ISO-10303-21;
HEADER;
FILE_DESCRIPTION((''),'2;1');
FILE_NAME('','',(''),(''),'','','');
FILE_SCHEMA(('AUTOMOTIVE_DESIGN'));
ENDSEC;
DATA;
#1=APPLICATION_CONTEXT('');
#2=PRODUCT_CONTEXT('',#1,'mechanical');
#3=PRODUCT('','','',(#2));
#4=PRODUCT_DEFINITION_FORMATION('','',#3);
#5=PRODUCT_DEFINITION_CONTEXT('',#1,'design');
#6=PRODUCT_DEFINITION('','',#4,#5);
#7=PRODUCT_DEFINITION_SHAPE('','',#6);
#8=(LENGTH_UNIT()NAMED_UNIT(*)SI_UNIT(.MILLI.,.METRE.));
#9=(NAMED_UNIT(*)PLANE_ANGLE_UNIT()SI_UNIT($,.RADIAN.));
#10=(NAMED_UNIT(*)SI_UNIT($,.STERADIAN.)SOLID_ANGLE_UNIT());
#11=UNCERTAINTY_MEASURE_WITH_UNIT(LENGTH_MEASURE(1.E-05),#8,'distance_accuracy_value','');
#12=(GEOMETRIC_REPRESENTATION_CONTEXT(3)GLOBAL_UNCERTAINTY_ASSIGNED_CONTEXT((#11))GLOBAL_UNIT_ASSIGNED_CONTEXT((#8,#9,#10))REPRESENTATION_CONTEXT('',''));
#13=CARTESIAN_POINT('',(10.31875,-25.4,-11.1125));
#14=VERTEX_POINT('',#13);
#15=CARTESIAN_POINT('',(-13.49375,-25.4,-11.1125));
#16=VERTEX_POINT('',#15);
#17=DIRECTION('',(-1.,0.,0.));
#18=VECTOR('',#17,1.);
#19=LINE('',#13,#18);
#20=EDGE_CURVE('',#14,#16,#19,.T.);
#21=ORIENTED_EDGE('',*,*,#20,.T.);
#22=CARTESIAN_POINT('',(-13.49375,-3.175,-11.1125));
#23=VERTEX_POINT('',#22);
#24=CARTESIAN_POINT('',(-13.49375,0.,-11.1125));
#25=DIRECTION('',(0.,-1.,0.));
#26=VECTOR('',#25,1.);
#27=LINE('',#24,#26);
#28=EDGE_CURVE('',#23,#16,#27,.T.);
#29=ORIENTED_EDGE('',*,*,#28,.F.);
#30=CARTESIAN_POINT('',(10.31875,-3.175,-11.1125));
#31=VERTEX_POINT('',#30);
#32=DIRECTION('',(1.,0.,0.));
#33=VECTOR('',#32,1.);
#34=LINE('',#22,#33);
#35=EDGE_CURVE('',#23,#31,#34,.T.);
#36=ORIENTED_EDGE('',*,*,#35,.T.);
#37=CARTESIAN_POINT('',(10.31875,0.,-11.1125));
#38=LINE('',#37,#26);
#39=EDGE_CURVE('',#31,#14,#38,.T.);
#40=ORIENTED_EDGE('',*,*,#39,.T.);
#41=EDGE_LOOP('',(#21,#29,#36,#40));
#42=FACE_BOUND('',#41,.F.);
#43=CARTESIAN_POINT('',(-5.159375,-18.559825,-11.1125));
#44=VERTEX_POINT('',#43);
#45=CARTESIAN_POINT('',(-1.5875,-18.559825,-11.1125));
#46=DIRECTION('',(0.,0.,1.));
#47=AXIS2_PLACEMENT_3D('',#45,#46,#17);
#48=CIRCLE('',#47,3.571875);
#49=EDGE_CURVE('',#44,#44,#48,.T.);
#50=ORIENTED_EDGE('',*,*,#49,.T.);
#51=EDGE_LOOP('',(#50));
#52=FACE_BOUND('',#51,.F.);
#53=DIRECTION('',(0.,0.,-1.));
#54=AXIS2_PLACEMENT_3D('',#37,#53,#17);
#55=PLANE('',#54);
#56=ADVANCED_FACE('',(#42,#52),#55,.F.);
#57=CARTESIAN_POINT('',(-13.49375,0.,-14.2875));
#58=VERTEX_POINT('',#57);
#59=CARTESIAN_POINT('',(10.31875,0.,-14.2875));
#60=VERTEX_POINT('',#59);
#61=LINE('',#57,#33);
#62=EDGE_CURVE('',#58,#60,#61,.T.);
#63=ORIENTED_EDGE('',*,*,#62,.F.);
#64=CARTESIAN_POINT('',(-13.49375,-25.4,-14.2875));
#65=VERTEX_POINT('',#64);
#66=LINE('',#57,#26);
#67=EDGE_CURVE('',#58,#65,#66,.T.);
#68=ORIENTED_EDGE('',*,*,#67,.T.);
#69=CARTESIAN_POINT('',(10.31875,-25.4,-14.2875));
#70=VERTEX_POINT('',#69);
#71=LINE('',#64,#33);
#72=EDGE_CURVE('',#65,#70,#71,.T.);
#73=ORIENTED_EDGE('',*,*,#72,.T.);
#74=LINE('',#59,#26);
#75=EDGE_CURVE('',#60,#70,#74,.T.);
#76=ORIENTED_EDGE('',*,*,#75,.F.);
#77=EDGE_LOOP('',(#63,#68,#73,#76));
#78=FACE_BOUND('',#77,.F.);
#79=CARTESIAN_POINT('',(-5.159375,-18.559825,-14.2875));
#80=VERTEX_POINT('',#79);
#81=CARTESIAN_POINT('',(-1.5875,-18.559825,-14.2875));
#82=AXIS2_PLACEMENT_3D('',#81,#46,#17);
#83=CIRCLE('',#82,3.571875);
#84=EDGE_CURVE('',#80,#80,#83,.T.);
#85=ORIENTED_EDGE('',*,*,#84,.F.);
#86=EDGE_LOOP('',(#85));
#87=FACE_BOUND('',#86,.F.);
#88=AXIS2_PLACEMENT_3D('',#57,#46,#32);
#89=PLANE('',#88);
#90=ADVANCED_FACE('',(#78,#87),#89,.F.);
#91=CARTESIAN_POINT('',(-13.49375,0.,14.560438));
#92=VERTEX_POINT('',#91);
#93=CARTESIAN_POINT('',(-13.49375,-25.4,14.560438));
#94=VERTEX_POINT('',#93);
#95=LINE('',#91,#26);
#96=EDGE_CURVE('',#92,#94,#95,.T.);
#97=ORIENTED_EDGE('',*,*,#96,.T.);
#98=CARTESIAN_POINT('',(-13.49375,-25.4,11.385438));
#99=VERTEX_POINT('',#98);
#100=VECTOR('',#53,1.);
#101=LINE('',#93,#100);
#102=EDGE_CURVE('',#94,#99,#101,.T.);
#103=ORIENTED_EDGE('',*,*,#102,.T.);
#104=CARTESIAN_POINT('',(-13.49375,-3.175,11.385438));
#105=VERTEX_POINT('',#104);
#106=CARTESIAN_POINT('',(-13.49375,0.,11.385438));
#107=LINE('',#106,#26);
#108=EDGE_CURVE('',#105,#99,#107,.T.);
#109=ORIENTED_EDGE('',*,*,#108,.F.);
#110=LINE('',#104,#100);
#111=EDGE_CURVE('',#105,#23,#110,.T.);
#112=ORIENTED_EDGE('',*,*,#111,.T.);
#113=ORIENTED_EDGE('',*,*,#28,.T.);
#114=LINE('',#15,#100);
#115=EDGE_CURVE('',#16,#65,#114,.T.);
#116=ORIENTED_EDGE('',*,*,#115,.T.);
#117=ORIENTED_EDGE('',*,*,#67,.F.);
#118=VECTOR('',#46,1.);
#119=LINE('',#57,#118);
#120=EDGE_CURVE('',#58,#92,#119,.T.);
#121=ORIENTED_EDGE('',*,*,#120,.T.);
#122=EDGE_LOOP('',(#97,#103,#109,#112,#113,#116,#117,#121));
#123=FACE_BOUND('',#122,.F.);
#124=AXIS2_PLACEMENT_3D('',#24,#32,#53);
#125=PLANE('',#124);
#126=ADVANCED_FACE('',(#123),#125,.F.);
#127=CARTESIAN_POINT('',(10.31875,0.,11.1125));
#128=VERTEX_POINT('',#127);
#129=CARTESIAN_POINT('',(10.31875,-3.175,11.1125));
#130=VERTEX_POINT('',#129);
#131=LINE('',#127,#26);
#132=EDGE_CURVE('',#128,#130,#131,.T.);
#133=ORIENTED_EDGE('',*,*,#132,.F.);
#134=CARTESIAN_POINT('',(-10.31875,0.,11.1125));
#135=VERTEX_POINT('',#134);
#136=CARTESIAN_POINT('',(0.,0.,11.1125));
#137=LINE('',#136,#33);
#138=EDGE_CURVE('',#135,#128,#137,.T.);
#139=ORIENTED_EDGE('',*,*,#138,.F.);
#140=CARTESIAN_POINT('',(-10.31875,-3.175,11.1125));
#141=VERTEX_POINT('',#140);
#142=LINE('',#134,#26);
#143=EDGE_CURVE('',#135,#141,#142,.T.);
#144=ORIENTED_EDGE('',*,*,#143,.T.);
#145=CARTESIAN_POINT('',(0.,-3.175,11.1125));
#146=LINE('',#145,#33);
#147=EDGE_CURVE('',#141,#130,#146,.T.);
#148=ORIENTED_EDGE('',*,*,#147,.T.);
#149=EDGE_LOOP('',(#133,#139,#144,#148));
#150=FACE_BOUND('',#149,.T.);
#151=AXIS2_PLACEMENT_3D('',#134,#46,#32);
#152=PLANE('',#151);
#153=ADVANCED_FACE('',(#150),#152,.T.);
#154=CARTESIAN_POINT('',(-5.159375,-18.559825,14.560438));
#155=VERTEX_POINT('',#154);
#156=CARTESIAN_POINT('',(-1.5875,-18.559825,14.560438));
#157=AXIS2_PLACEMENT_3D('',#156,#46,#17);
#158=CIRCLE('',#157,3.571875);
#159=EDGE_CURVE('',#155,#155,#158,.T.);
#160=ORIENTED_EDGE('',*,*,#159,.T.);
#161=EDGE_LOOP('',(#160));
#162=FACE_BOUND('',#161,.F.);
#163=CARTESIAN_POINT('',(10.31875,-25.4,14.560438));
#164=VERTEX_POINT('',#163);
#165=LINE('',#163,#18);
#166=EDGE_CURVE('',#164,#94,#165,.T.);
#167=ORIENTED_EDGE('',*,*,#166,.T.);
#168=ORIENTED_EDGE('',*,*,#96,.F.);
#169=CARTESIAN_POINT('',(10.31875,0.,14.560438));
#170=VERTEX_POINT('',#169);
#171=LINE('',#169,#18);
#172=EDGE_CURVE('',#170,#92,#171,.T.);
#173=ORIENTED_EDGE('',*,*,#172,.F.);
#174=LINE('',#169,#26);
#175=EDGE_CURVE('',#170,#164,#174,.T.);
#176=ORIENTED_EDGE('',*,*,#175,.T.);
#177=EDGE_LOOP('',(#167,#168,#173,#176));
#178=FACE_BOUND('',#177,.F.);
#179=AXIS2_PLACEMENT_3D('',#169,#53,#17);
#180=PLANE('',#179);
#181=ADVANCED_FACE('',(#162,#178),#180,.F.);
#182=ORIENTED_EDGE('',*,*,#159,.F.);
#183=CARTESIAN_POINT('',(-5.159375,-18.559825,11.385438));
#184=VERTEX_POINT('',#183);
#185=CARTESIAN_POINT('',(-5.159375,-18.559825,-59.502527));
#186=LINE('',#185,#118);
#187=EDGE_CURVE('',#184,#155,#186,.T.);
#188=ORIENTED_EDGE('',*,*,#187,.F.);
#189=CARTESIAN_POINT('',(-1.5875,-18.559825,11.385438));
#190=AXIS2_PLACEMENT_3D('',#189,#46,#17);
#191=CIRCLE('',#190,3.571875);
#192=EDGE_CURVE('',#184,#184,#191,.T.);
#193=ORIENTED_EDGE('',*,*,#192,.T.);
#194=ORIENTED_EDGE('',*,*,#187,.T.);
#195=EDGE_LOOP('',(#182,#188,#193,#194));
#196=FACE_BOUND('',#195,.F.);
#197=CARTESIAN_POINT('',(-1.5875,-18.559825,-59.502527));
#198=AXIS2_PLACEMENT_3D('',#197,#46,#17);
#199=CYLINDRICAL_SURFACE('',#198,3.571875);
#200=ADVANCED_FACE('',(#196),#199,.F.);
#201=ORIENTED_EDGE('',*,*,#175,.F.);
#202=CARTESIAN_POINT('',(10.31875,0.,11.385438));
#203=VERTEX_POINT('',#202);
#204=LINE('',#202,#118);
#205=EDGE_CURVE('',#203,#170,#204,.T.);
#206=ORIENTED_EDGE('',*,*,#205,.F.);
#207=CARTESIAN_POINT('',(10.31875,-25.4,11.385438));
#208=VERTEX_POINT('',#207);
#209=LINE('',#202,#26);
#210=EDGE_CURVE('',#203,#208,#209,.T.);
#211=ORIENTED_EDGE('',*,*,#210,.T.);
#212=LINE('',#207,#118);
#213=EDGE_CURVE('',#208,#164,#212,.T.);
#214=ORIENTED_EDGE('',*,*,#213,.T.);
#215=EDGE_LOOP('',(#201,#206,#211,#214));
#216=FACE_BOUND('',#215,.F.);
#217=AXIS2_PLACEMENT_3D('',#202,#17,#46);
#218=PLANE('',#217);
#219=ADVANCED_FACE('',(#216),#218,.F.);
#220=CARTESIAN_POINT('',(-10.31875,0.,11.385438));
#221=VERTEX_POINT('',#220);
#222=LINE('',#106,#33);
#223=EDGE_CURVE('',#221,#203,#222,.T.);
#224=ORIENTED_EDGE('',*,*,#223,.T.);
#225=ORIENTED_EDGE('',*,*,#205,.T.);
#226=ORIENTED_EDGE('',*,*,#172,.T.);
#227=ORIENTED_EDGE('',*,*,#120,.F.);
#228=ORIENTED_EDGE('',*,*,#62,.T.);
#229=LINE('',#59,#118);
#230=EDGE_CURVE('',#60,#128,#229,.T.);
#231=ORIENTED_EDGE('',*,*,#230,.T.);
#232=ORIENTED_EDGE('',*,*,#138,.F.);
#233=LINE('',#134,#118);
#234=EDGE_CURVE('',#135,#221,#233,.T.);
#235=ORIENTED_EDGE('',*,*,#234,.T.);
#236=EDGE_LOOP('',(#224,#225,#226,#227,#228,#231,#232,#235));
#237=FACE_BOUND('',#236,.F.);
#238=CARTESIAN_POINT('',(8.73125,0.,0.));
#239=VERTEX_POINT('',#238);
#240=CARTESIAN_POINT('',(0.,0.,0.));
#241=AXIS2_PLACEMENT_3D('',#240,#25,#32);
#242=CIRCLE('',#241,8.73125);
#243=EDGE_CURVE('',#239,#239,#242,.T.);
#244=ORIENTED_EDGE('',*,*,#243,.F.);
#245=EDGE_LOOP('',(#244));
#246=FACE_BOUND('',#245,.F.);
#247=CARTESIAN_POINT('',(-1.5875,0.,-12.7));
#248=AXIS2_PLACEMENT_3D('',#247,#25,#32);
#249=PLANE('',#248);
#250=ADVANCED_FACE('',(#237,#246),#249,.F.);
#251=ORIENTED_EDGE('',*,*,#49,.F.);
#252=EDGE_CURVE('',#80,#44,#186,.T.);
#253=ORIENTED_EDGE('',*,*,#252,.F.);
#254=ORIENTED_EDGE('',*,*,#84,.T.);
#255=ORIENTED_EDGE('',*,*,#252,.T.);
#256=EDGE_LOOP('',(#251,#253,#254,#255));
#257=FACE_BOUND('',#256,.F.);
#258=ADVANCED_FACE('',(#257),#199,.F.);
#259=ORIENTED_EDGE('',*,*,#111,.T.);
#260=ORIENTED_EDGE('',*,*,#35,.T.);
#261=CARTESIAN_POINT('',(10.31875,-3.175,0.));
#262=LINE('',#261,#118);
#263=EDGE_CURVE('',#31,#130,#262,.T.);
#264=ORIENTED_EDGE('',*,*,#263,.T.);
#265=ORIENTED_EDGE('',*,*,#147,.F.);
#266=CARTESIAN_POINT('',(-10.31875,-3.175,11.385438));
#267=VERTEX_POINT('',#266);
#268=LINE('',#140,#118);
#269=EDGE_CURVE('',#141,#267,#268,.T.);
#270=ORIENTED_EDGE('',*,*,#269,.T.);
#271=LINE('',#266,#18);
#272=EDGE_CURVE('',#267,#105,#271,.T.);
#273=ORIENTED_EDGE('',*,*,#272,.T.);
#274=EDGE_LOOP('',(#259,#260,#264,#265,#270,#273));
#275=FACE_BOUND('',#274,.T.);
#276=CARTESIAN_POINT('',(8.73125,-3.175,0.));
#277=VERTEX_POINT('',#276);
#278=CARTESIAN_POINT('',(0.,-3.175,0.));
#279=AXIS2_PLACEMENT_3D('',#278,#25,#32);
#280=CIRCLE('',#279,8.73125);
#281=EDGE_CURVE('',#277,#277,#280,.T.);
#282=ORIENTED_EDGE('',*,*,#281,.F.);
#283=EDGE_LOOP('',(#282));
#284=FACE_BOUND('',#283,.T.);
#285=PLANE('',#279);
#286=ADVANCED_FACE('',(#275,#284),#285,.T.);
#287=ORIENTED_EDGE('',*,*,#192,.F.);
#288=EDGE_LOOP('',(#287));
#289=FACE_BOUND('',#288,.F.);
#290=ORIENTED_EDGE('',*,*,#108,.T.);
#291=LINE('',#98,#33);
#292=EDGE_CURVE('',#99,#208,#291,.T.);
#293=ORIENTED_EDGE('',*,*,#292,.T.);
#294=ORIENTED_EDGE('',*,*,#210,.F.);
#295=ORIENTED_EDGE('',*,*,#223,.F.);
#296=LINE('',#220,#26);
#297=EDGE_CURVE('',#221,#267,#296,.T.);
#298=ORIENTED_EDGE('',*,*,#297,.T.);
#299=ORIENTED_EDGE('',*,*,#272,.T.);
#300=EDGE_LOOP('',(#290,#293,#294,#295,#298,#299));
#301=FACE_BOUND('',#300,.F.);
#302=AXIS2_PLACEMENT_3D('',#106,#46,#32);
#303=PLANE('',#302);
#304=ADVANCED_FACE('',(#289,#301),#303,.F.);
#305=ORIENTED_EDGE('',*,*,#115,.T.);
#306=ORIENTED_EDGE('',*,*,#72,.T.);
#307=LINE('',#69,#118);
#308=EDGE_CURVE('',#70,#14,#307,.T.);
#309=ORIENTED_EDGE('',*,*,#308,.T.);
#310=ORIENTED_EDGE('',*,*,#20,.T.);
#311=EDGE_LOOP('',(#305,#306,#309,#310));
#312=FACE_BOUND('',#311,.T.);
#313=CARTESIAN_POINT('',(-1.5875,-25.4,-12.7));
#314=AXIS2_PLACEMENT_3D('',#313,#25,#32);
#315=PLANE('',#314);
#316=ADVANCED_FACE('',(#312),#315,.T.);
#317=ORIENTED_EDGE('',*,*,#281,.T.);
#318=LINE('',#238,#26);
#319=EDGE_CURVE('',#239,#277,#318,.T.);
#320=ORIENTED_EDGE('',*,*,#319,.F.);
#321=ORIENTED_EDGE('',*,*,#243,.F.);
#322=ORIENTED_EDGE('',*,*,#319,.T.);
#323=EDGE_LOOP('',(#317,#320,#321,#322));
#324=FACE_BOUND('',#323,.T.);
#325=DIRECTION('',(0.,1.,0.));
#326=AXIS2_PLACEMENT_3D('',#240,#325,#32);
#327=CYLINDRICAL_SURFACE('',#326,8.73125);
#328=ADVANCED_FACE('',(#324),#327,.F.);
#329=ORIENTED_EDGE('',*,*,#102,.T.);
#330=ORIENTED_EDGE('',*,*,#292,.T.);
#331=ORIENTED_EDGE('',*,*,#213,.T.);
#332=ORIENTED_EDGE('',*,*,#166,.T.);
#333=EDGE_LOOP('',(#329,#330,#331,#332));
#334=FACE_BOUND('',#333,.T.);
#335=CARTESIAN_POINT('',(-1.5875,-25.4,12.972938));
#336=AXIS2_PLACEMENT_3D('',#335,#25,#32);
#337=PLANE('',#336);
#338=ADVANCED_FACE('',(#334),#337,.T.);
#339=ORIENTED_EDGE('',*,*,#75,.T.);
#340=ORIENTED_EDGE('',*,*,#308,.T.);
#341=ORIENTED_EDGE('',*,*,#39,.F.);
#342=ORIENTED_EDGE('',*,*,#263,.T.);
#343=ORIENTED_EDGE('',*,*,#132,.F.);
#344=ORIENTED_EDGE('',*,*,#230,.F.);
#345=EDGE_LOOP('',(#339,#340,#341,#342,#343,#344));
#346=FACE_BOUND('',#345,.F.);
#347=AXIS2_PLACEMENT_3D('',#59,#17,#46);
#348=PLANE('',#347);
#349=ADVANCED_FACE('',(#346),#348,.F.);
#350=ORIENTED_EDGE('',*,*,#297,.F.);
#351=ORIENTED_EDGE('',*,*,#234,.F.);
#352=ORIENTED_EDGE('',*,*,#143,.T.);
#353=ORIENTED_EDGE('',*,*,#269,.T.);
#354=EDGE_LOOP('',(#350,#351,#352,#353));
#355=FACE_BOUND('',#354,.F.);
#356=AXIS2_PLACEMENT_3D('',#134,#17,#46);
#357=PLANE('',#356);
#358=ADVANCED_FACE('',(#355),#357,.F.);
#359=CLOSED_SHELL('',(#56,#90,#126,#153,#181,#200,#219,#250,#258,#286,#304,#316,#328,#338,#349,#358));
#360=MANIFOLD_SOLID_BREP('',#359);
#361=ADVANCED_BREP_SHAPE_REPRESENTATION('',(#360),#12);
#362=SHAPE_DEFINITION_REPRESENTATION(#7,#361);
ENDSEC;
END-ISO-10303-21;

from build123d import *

# Parameters (mm, degrees)
F0_W     = 20.6375
F0_H     = 22.225
F0_R     = 8.73125
F1_DEPTH = 3.175
F2_DEPTH = 25.4
F4_D     = 7.14375


# Not quite as in the source:
# - a length typed as a fraction of an inch, garbled in the dataset ("3 / 203.2 mm" for 3/8 in), is restored


with BuildPart() as f1:
    # F0 (on Front) → F1 (new body)
    with BuildSketch(Plane.XZ):
        Rectangle(F0_W, F0_H)
        Circle(F0_R, mode=Mode.SUBTRACT)
        Polygon((-10.31875, -11.1125), (-10.31875, 11.1125), (-10.31875, 11.3854380324), (-13.49375, 11.3854380324), (-13.49375, -11.1125), align=None)
    extrude(amount=F1_DEPTH)

    # F0 (on Front) → F2 (join)
    with BuildSketch(Plane.XZ):
        Polygon((10.31875, -14.2875), (10.31875, -11.1125), (-10.31875, -11.1125), (-13.49375, -11.1125), (-13.49375, -14.2875), align=None)
        Polygon((-13.49375, 11.3854380324), (-10.31875, 11.3854380324), (10.31875, 11.3854380324), (10.31875, 14.5604380324), (-13.49375, 14.5604380324), align=None)
    extrude(amount=F2_DEPTH)

    # F4 (through all)
    with Locations(Plane(origin=(0, 0, -14.2875), x_dir=(1, 0, 0), z_dir=(0, 0, -1))):
        with Locations((-1.5875, 18.5598246753)):
            Hole(F4_D / 2)


solid = f1.part
